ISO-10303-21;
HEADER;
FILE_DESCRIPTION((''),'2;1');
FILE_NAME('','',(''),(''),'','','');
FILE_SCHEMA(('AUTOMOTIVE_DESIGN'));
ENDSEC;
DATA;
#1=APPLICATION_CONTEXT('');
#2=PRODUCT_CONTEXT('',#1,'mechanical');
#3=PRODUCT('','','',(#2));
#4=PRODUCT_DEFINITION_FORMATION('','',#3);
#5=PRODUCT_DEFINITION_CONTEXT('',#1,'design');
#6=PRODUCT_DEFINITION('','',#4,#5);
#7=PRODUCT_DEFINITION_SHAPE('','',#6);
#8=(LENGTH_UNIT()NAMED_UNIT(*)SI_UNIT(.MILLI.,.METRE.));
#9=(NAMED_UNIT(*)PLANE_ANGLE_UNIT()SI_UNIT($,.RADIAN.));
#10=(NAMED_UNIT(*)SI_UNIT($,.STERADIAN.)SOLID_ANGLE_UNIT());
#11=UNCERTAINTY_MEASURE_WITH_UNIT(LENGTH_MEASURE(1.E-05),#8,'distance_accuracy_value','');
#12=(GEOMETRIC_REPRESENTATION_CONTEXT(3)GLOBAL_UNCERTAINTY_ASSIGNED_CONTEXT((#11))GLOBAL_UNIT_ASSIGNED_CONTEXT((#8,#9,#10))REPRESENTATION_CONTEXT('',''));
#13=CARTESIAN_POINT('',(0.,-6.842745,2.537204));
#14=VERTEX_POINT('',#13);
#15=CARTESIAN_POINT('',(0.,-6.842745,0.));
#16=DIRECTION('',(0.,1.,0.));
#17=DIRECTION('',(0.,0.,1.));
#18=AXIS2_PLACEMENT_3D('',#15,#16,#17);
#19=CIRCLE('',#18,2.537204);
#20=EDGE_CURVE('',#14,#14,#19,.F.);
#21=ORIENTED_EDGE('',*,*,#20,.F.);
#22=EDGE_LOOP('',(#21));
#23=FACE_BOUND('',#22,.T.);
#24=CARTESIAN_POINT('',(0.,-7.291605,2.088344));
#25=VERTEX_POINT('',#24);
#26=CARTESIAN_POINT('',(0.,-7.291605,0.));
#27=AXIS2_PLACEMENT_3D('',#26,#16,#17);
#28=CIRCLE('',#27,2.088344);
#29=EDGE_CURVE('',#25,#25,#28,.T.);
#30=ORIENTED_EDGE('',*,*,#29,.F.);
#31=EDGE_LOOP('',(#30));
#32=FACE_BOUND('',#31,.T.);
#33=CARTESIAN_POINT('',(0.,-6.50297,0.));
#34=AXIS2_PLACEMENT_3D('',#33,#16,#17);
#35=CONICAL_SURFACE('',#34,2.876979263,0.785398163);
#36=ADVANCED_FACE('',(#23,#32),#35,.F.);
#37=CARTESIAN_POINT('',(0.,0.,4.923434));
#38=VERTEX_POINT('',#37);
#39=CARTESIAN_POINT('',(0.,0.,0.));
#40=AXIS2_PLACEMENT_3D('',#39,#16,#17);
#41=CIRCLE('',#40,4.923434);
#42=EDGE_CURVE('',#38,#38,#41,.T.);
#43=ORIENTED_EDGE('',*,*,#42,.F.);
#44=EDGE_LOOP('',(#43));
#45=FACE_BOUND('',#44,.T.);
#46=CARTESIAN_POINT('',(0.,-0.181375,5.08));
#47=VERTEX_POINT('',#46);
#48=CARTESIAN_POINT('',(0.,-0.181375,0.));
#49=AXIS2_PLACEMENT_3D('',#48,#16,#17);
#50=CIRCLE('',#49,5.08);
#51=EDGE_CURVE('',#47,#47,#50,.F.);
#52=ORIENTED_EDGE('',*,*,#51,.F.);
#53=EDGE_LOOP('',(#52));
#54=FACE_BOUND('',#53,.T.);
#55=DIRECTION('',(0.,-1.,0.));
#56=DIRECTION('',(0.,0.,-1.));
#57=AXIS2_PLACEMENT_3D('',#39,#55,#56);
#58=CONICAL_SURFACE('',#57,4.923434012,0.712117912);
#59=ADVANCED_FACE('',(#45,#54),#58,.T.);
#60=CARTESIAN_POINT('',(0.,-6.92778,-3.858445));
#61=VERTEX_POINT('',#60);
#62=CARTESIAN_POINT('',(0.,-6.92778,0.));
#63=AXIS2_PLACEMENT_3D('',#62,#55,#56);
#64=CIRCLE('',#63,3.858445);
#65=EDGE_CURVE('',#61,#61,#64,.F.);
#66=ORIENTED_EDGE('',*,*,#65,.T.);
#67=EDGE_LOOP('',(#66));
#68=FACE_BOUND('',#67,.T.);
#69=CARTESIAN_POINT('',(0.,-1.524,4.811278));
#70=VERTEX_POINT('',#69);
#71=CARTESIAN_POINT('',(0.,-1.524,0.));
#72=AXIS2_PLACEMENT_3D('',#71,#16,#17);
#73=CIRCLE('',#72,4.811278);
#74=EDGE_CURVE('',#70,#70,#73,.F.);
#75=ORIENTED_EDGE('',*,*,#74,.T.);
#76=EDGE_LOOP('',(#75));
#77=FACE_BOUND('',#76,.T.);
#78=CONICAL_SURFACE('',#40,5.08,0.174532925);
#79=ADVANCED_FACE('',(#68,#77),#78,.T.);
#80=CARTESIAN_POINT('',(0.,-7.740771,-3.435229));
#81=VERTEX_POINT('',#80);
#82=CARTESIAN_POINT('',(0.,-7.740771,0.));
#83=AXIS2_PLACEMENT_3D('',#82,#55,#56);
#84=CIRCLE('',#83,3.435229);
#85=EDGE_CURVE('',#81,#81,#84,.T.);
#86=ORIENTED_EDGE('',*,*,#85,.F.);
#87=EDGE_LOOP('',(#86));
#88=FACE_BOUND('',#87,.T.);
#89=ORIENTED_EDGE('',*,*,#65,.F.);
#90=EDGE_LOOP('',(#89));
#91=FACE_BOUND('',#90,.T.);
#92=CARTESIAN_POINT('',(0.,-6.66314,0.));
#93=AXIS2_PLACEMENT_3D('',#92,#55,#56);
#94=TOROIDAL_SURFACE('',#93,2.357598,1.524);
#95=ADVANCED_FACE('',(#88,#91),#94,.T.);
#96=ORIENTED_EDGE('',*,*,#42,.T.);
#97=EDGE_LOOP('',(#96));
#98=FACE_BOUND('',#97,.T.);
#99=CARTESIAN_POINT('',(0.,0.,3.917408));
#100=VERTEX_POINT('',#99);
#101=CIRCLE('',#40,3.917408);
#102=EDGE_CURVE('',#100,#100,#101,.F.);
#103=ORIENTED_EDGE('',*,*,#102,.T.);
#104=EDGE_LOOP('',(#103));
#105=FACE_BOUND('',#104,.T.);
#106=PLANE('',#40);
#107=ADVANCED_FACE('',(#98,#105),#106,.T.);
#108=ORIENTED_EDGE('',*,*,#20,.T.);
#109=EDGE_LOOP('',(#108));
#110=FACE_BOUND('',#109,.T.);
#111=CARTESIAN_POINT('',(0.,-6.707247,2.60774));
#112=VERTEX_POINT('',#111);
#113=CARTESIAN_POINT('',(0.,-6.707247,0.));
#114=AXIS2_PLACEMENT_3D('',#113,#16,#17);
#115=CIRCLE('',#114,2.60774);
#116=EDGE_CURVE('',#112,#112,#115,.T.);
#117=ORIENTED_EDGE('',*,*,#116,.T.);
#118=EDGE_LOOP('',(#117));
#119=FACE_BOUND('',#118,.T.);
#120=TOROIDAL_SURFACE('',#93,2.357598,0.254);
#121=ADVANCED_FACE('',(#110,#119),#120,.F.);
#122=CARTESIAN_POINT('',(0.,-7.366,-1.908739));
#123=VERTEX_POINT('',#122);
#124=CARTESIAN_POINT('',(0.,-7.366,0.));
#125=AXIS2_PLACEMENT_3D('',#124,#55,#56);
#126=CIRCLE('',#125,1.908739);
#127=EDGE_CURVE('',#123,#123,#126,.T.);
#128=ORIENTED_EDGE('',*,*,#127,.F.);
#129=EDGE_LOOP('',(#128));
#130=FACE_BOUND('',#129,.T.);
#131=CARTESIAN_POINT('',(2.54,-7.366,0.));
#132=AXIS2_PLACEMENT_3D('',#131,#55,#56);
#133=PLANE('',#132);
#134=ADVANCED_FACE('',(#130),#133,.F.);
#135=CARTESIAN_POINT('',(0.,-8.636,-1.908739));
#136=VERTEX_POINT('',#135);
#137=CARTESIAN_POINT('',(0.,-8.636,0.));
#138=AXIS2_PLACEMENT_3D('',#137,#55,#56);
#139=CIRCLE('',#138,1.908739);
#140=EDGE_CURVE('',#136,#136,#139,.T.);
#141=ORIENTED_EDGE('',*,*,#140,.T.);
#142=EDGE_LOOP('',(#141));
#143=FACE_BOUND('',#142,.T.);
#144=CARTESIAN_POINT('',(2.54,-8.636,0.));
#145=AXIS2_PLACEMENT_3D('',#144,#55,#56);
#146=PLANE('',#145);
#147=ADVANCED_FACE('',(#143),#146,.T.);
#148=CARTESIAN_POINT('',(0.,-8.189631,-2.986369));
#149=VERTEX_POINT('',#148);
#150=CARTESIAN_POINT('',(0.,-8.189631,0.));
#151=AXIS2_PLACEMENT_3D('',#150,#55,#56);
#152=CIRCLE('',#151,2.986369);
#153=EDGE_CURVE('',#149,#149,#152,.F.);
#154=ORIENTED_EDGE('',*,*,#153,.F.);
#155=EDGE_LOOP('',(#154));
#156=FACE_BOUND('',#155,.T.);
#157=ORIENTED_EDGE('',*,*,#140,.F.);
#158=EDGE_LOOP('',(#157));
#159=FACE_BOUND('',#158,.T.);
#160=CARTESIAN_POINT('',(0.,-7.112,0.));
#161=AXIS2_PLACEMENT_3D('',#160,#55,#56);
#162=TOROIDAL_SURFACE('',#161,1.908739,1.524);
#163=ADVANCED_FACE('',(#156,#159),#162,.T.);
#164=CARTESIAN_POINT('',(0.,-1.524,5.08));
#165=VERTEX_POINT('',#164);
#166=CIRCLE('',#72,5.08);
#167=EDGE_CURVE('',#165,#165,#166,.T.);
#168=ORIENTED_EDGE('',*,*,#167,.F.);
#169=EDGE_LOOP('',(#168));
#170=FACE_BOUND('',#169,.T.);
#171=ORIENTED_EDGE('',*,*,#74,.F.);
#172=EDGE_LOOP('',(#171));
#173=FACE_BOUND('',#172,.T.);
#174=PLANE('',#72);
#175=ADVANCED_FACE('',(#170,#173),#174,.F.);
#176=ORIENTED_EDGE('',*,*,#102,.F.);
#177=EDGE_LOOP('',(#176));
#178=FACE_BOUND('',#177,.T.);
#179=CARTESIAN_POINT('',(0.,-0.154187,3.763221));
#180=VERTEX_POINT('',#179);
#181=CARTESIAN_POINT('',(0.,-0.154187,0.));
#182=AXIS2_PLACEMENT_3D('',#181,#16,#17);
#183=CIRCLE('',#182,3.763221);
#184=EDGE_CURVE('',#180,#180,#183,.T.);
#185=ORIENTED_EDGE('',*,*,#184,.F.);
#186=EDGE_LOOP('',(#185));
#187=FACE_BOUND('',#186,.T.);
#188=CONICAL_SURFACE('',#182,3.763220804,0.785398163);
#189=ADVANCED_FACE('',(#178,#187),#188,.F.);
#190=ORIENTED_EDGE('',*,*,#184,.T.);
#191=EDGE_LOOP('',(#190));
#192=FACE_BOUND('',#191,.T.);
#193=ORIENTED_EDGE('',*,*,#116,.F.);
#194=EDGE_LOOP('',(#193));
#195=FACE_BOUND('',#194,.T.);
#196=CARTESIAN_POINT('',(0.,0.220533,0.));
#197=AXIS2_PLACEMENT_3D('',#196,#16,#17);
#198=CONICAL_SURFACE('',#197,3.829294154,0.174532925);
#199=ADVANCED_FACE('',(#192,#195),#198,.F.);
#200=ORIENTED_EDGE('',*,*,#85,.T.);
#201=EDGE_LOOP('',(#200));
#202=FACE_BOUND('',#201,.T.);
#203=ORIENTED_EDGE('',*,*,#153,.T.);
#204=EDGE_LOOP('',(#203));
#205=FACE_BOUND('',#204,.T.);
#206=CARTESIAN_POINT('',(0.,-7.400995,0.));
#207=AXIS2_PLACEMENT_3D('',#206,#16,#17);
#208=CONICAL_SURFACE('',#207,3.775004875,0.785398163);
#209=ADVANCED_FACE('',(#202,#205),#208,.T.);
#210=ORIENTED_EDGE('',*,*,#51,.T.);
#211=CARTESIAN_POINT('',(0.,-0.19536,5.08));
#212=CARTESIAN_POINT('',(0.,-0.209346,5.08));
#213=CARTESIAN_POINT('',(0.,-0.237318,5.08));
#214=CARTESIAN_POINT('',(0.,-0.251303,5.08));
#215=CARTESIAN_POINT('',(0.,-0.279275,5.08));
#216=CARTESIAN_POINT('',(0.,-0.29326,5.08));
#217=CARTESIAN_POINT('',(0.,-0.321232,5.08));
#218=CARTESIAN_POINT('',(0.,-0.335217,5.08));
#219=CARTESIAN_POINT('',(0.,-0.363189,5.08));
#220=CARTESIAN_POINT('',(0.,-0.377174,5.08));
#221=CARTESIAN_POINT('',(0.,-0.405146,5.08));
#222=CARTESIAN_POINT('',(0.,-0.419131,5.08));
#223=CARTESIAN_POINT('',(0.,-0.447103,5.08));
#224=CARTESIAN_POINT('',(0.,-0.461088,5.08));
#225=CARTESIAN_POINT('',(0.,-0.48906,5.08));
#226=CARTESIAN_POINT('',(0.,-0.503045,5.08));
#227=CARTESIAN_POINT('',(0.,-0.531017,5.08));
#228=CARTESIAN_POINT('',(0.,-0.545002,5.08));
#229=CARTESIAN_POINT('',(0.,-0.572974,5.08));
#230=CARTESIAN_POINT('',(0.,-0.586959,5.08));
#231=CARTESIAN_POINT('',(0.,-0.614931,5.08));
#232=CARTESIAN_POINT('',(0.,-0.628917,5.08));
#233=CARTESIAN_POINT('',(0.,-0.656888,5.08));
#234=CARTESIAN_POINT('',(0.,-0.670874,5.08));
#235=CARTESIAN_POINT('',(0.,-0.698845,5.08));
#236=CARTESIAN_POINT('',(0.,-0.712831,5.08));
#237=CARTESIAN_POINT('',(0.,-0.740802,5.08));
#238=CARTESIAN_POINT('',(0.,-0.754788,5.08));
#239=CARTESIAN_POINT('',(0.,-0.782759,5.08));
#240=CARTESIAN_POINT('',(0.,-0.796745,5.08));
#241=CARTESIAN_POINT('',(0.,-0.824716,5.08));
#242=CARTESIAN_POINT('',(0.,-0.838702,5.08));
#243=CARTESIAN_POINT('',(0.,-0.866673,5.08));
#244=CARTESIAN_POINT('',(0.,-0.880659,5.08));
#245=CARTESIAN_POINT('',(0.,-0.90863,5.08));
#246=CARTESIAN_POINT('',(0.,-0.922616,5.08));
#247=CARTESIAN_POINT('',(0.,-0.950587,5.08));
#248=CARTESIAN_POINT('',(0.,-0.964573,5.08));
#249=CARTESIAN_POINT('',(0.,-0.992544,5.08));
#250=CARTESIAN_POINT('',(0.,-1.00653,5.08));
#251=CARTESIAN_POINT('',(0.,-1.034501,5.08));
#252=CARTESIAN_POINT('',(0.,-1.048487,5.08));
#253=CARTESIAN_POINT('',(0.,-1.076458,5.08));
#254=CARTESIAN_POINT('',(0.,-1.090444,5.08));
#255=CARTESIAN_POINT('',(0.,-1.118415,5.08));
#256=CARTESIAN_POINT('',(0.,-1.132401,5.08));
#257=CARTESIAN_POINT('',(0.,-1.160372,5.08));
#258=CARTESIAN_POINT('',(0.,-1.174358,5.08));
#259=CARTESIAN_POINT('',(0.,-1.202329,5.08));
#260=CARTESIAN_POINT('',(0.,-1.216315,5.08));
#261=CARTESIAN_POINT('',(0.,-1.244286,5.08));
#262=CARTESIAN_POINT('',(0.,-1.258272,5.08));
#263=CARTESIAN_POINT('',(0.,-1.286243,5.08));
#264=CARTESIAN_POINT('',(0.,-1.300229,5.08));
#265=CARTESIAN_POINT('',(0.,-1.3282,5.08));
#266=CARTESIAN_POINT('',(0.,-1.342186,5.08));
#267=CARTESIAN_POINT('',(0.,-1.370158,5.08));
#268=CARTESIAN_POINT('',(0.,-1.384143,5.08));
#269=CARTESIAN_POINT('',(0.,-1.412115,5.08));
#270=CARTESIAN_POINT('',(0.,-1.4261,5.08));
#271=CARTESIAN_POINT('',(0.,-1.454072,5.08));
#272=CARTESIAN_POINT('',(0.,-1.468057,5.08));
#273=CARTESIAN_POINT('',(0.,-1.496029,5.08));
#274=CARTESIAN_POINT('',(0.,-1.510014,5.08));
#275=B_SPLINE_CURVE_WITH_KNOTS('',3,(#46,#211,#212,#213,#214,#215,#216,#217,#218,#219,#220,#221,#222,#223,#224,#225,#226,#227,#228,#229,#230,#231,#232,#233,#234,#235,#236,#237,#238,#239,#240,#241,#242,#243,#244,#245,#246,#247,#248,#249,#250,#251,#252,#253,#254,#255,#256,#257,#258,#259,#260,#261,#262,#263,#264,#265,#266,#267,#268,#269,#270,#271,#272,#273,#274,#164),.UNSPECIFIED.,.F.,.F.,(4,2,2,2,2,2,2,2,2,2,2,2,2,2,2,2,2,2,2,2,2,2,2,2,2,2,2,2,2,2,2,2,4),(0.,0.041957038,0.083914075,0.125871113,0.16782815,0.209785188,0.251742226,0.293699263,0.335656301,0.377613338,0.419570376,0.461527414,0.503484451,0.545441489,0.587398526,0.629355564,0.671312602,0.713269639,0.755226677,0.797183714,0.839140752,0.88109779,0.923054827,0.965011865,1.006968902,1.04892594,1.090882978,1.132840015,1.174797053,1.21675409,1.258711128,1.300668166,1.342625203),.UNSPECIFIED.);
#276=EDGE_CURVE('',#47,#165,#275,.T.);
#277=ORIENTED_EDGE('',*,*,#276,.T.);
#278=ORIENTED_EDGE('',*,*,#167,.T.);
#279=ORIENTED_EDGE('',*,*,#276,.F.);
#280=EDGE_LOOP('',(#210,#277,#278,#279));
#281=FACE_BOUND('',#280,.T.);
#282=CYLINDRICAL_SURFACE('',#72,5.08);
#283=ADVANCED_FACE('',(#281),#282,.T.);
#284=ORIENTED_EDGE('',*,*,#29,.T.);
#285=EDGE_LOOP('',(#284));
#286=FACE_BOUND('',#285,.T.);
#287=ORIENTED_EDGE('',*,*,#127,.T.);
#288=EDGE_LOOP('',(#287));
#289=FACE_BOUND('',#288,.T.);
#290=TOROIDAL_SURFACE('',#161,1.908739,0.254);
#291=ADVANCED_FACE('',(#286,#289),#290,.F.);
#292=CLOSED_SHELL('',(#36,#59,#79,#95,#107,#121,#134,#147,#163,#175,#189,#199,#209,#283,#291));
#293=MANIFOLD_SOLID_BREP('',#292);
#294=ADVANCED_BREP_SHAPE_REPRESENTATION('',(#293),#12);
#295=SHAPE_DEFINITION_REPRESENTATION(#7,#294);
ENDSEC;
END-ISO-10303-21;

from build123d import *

# Parameters (mm, degrees)
FILLET1_R   = 1.524
SHELL1_T    = -1.27
SKETCH2_R   = 5.08
SKETCH2_R_2 = 3.790408203
RIM_DEPTH   = 1.524


with BuildPart() as part:
    # Sketch1 → Body (revolve)
    with BuildSketch(Plane.XY, mode=Mode.PRIVATE) as body_sk:
        Polygon((0, 0), (5.08, 0), (3.775004875, -7.400995125), (2.54, -8.636), (0, -8.636), align=None)
    revolve(body_sk.sketch.rotate(Axis((0, 0, 0), (0, -1, 0)), 90), axis=Axis((0, 0, 0), (0, -1, 0)))

    # Fillet1
    fillet1_edges = [part.edges().sort_by_distance(p)[0] for p in [
        (0, -8.636, -2.54),
        (0, -7.400995125, -3.775004875),
    ]]
    fillet(fillet1_edges, radius=FILLET1_R)

    # Shell1
    shell1_openings = [part.faces().sort_by_distance(p)[0] for p in [
        (0, 0, 0),
    ]]
    offset(amount=SHELL1_T, openings=shell1_openings, kind=Kind.INTERSECTION)

    # Sketch2 → Rim (add)
    with BuildSketch(Plane(origin=(0, 0, 0), x_dir=(-1, 0, 0), z_dir=(0, 1, 0))):
        with Locations(Location((0, 0, 0), (0, 0, 90))):
            Circle(SKETCH2_R)
        Circle(SKETCH2_R_2, mode=Mode.SUBTRACT)
    extrude(amount=-RIM_DEPTH)

    # Chamfer1: read off the stored shape, not the designer's step
    # Chamfer1 outline → Chamfer1 (revolve, cut)
    with BuildSketch(Plane.XY):
        Polygon((5.08, 0), (4.923434012, 0), (5.08, -0.181374797), align=None)
        Polygon((3.763220804, -0.154187398), (3.917408203, 0), (3.763220804, 0), align=None)
    revolve(axis=Axis((0, 0, 0), (0, 1, 0)), mode=Mode.SUBTRACT)


solid = part.part
